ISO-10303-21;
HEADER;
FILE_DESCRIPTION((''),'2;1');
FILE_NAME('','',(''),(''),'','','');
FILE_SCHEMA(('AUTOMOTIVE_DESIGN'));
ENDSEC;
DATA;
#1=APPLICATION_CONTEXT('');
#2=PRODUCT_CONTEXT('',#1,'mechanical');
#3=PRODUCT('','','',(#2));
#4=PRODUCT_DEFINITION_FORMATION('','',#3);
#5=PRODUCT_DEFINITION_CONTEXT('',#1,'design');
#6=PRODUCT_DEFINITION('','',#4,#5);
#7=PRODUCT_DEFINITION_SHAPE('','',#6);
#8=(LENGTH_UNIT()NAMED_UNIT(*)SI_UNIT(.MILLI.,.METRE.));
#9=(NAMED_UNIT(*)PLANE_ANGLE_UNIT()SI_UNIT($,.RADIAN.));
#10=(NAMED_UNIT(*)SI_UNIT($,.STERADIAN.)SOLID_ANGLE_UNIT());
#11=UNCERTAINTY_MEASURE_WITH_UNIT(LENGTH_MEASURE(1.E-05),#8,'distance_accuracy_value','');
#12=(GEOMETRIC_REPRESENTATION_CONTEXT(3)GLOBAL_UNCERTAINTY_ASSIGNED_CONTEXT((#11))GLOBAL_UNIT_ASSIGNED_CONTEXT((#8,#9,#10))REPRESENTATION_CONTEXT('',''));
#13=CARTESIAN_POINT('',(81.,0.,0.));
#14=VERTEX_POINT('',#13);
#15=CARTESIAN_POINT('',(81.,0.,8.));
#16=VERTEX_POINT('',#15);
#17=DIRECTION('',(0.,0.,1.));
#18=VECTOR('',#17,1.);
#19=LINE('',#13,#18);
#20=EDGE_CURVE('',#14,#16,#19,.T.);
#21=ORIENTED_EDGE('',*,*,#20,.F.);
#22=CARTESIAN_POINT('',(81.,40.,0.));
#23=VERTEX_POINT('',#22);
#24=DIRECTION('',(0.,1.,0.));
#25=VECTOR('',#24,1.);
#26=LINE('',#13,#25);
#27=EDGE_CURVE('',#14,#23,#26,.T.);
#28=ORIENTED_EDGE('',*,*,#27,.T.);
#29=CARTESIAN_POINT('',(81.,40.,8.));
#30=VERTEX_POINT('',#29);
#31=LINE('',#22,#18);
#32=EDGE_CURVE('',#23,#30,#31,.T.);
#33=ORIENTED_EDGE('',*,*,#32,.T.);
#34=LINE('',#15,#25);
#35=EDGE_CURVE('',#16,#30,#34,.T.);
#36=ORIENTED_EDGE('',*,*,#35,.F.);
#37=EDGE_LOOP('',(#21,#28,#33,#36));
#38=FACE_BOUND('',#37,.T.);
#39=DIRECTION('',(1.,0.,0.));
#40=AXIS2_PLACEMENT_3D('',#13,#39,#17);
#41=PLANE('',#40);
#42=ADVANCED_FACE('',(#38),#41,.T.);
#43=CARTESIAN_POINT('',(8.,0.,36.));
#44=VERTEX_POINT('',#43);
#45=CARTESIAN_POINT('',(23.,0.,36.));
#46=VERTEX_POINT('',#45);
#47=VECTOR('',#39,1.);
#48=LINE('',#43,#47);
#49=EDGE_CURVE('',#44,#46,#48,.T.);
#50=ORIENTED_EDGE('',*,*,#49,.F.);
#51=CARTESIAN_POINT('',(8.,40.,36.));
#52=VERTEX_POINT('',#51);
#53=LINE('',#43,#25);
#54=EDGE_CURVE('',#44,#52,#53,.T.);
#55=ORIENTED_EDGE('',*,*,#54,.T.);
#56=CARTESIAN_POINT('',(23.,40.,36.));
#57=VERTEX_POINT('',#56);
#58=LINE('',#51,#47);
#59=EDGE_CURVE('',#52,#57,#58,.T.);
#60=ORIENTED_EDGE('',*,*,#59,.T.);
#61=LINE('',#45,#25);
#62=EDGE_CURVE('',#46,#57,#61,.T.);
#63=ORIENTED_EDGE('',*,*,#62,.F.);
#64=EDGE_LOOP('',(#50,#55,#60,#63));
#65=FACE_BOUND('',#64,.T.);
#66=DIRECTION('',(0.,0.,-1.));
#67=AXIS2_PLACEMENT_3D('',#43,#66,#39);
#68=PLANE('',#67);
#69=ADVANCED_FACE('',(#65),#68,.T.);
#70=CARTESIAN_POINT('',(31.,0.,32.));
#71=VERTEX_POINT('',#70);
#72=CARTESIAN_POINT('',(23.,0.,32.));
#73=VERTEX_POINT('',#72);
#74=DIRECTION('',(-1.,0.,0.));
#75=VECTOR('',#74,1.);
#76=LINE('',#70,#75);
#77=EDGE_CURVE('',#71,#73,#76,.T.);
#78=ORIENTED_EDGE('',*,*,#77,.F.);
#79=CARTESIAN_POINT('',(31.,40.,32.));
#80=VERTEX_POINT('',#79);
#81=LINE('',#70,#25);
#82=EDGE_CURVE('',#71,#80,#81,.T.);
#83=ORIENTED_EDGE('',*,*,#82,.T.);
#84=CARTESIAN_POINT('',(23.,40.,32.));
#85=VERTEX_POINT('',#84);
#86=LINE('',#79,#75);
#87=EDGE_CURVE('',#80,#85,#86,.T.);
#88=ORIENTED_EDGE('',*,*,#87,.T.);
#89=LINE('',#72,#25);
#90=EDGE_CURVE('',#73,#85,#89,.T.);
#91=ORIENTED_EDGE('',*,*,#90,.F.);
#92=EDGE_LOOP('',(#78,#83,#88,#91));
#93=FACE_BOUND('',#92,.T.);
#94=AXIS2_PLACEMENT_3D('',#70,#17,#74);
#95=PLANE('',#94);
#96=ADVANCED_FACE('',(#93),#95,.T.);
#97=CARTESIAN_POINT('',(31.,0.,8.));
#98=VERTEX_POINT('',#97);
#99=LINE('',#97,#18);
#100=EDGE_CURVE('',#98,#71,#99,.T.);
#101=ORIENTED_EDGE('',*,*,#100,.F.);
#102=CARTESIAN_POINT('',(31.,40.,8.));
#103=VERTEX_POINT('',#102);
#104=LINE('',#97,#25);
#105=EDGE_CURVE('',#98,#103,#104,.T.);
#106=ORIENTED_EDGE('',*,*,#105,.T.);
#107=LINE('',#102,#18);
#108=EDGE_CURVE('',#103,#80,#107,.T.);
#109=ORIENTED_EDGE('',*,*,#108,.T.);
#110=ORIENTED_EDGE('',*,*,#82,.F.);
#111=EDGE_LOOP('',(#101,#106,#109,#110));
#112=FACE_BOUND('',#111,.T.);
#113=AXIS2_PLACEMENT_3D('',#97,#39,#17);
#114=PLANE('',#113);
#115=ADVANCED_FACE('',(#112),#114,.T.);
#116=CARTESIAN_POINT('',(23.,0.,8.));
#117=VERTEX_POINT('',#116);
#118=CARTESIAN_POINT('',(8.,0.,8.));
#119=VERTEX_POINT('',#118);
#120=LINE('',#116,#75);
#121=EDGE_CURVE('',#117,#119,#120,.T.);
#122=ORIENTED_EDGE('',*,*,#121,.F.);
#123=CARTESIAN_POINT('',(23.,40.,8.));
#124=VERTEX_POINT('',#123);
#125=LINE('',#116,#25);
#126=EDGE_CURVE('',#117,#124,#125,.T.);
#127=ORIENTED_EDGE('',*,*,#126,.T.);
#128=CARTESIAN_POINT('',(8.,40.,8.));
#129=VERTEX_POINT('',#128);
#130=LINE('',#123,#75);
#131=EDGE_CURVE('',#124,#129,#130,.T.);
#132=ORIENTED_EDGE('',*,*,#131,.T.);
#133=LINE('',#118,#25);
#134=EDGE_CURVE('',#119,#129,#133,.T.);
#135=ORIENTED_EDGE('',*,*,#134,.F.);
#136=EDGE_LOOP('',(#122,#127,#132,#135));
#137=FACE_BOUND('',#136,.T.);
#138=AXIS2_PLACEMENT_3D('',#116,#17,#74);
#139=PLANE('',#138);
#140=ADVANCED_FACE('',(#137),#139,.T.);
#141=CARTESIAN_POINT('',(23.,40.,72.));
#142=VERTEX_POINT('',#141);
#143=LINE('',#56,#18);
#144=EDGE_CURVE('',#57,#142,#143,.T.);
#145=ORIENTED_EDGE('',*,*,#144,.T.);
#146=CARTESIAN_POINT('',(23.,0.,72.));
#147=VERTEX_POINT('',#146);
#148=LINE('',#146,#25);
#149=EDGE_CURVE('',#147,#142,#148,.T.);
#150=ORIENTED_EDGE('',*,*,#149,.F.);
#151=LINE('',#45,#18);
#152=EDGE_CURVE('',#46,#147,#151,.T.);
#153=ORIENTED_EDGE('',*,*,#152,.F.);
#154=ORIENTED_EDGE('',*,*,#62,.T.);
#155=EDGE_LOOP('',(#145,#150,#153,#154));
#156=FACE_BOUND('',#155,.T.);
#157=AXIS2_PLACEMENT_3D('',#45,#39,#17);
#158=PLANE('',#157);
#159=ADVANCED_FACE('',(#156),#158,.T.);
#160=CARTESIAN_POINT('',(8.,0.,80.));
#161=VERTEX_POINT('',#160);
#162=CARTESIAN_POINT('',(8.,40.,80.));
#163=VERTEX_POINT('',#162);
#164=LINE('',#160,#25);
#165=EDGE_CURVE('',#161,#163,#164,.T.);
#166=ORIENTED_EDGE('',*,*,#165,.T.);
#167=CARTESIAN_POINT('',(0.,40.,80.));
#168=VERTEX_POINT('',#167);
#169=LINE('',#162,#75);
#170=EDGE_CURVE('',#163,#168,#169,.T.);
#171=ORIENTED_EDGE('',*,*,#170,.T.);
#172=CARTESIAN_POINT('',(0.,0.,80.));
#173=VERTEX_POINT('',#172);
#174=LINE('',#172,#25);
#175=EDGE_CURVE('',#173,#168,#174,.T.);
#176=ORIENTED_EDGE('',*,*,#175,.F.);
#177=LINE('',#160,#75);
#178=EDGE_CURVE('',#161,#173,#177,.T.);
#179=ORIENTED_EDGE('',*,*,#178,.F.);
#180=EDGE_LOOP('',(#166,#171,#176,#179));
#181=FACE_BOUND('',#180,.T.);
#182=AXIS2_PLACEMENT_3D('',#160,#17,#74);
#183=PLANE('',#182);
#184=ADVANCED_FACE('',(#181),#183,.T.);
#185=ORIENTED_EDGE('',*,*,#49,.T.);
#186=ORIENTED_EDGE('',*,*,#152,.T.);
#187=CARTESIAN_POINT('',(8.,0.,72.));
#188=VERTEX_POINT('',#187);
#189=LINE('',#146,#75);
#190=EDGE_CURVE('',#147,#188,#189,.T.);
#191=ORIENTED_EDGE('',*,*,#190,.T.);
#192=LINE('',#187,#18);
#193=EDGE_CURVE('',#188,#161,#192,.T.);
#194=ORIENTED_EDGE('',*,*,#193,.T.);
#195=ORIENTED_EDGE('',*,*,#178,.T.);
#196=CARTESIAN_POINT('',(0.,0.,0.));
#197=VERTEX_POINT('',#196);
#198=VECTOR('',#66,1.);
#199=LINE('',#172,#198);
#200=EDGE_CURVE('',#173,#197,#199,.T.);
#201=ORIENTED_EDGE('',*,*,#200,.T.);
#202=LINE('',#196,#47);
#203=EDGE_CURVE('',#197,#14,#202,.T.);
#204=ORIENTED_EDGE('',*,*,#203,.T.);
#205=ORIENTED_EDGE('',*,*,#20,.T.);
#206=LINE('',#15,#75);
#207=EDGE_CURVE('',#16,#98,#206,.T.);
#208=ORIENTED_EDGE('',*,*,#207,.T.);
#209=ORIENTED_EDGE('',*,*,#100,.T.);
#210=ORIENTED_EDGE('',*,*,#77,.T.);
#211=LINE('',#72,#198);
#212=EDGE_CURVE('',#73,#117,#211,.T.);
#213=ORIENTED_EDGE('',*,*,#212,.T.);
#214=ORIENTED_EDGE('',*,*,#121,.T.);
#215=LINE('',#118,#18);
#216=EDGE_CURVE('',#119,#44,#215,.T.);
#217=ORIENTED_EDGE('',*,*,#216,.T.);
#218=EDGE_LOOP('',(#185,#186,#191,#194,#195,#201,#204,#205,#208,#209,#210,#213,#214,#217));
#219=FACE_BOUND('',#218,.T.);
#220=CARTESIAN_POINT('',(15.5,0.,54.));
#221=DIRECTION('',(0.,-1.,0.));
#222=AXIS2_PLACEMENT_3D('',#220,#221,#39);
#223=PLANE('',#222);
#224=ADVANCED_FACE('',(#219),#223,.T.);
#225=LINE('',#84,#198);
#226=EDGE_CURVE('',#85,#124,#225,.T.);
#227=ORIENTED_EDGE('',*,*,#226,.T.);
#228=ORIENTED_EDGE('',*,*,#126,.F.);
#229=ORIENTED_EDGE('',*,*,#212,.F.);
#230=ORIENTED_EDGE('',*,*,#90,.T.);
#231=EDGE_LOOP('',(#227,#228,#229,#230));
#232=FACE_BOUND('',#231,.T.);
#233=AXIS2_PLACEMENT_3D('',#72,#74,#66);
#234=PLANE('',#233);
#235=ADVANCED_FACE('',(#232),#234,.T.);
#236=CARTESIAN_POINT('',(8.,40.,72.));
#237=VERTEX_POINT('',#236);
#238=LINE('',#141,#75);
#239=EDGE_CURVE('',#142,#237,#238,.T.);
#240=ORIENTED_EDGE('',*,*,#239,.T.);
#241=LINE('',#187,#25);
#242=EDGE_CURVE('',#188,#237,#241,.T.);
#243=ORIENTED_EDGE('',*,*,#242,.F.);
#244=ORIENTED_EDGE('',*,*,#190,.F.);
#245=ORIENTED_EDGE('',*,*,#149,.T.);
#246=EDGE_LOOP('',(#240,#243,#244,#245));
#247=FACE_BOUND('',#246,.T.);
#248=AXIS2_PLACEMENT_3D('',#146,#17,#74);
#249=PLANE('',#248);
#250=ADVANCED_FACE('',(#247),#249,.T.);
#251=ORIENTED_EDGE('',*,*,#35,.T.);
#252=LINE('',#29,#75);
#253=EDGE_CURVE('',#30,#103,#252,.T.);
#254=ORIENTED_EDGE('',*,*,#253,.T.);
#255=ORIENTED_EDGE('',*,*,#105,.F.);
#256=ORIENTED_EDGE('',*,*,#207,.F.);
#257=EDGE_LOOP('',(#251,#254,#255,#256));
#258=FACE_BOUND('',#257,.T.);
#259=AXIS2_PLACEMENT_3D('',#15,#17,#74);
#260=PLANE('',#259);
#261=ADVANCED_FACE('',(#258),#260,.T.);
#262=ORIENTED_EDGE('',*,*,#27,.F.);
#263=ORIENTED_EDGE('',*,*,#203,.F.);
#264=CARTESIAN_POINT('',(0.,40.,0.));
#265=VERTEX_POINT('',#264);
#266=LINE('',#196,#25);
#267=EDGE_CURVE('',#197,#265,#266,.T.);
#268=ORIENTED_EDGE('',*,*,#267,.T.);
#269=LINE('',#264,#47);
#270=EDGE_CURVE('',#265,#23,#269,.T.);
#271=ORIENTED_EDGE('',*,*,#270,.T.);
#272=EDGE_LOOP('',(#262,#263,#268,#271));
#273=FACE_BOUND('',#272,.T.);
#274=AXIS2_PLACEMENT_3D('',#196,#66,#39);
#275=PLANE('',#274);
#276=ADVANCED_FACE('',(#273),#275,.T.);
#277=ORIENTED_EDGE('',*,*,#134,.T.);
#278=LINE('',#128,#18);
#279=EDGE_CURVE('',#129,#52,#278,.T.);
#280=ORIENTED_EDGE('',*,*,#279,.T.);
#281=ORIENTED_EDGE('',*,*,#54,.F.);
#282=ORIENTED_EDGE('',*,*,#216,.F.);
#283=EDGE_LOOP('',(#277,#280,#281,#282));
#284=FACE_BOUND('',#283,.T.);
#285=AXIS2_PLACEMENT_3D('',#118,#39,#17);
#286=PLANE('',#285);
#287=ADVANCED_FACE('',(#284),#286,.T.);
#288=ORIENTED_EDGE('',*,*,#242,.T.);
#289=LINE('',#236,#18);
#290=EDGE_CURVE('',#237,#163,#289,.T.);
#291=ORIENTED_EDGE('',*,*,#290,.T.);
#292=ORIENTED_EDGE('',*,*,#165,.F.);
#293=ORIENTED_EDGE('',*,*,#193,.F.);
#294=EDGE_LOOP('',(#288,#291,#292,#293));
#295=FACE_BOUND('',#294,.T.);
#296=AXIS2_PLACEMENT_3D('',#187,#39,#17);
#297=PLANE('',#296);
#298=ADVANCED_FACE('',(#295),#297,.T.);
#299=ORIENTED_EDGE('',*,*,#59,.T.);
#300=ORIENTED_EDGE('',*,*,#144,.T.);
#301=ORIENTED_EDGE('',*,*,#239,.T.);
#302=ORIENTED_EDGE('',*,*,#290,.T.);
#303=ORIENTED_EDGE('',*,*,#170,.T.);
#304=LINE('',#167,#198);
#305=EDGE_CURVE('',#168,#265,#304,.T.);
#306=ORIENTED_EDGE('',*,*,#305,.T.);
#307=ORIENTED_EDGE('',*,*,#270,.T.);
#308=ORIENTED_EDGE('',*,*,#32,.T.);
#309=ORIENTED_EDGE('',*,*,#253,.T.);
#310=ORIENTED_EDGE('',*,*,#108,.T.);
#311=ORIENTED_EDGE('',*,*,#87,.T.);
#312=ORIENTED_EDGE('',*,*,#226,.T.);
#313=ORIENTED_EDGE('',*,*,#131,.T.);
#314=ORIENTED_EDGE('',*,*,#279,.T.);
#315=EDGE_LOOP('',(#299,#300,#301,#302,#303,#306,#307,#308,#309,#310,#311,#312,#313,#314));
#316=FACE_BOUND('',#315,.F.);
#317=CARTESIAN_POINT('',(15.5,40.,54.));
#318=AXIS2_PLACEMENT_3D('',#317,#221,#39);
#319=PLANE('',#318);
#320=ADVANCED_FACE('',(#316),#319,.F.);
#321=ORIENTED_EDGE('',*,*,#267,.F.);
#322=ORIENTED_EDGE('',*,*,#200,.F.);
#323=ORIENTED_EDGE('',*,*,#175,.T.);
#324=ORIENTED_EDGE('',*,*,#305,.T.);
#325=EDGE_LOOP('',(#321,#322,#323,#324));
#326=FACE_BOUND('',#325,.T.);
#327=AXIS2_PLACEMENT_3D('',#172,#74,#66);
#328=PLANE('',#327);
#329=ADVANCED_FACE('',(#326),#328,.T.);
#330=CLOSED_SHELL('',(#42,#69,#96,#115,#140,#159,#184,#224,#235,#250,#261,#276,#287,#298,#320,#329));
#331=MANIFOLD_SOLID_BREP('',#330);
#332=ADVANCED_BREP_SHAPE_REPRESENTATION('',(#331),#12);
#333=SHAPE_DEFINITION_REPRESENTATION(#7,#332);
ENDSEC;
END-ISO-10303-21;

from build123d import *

# Parameters (mm, degrees)
F1_DEPTH = 40


# Not quite as in the source:
# - a feature names something its author has since deleted; it is built from what else it names


with BuildPart() as f1:
    # F0 (on Front) → F1 (new body)
    with BuildSketch(Plane.XZ):
        Polygon((23, 72), (8, 72), (8, 39.8151502013), (8, 36), (23, 36), align=None)
        Polygon((0, 80), (0, 0), (81, 0), (81, 8), (56, 8), (31, 8), (31, 32), (23, 32), (23, 8), (8, 8), (8, 36), (8, 39.8151502013), (8, 72), (8, 80), align=None)
    extrude(amount=-F1_DEPTH)


solid = f1.part
